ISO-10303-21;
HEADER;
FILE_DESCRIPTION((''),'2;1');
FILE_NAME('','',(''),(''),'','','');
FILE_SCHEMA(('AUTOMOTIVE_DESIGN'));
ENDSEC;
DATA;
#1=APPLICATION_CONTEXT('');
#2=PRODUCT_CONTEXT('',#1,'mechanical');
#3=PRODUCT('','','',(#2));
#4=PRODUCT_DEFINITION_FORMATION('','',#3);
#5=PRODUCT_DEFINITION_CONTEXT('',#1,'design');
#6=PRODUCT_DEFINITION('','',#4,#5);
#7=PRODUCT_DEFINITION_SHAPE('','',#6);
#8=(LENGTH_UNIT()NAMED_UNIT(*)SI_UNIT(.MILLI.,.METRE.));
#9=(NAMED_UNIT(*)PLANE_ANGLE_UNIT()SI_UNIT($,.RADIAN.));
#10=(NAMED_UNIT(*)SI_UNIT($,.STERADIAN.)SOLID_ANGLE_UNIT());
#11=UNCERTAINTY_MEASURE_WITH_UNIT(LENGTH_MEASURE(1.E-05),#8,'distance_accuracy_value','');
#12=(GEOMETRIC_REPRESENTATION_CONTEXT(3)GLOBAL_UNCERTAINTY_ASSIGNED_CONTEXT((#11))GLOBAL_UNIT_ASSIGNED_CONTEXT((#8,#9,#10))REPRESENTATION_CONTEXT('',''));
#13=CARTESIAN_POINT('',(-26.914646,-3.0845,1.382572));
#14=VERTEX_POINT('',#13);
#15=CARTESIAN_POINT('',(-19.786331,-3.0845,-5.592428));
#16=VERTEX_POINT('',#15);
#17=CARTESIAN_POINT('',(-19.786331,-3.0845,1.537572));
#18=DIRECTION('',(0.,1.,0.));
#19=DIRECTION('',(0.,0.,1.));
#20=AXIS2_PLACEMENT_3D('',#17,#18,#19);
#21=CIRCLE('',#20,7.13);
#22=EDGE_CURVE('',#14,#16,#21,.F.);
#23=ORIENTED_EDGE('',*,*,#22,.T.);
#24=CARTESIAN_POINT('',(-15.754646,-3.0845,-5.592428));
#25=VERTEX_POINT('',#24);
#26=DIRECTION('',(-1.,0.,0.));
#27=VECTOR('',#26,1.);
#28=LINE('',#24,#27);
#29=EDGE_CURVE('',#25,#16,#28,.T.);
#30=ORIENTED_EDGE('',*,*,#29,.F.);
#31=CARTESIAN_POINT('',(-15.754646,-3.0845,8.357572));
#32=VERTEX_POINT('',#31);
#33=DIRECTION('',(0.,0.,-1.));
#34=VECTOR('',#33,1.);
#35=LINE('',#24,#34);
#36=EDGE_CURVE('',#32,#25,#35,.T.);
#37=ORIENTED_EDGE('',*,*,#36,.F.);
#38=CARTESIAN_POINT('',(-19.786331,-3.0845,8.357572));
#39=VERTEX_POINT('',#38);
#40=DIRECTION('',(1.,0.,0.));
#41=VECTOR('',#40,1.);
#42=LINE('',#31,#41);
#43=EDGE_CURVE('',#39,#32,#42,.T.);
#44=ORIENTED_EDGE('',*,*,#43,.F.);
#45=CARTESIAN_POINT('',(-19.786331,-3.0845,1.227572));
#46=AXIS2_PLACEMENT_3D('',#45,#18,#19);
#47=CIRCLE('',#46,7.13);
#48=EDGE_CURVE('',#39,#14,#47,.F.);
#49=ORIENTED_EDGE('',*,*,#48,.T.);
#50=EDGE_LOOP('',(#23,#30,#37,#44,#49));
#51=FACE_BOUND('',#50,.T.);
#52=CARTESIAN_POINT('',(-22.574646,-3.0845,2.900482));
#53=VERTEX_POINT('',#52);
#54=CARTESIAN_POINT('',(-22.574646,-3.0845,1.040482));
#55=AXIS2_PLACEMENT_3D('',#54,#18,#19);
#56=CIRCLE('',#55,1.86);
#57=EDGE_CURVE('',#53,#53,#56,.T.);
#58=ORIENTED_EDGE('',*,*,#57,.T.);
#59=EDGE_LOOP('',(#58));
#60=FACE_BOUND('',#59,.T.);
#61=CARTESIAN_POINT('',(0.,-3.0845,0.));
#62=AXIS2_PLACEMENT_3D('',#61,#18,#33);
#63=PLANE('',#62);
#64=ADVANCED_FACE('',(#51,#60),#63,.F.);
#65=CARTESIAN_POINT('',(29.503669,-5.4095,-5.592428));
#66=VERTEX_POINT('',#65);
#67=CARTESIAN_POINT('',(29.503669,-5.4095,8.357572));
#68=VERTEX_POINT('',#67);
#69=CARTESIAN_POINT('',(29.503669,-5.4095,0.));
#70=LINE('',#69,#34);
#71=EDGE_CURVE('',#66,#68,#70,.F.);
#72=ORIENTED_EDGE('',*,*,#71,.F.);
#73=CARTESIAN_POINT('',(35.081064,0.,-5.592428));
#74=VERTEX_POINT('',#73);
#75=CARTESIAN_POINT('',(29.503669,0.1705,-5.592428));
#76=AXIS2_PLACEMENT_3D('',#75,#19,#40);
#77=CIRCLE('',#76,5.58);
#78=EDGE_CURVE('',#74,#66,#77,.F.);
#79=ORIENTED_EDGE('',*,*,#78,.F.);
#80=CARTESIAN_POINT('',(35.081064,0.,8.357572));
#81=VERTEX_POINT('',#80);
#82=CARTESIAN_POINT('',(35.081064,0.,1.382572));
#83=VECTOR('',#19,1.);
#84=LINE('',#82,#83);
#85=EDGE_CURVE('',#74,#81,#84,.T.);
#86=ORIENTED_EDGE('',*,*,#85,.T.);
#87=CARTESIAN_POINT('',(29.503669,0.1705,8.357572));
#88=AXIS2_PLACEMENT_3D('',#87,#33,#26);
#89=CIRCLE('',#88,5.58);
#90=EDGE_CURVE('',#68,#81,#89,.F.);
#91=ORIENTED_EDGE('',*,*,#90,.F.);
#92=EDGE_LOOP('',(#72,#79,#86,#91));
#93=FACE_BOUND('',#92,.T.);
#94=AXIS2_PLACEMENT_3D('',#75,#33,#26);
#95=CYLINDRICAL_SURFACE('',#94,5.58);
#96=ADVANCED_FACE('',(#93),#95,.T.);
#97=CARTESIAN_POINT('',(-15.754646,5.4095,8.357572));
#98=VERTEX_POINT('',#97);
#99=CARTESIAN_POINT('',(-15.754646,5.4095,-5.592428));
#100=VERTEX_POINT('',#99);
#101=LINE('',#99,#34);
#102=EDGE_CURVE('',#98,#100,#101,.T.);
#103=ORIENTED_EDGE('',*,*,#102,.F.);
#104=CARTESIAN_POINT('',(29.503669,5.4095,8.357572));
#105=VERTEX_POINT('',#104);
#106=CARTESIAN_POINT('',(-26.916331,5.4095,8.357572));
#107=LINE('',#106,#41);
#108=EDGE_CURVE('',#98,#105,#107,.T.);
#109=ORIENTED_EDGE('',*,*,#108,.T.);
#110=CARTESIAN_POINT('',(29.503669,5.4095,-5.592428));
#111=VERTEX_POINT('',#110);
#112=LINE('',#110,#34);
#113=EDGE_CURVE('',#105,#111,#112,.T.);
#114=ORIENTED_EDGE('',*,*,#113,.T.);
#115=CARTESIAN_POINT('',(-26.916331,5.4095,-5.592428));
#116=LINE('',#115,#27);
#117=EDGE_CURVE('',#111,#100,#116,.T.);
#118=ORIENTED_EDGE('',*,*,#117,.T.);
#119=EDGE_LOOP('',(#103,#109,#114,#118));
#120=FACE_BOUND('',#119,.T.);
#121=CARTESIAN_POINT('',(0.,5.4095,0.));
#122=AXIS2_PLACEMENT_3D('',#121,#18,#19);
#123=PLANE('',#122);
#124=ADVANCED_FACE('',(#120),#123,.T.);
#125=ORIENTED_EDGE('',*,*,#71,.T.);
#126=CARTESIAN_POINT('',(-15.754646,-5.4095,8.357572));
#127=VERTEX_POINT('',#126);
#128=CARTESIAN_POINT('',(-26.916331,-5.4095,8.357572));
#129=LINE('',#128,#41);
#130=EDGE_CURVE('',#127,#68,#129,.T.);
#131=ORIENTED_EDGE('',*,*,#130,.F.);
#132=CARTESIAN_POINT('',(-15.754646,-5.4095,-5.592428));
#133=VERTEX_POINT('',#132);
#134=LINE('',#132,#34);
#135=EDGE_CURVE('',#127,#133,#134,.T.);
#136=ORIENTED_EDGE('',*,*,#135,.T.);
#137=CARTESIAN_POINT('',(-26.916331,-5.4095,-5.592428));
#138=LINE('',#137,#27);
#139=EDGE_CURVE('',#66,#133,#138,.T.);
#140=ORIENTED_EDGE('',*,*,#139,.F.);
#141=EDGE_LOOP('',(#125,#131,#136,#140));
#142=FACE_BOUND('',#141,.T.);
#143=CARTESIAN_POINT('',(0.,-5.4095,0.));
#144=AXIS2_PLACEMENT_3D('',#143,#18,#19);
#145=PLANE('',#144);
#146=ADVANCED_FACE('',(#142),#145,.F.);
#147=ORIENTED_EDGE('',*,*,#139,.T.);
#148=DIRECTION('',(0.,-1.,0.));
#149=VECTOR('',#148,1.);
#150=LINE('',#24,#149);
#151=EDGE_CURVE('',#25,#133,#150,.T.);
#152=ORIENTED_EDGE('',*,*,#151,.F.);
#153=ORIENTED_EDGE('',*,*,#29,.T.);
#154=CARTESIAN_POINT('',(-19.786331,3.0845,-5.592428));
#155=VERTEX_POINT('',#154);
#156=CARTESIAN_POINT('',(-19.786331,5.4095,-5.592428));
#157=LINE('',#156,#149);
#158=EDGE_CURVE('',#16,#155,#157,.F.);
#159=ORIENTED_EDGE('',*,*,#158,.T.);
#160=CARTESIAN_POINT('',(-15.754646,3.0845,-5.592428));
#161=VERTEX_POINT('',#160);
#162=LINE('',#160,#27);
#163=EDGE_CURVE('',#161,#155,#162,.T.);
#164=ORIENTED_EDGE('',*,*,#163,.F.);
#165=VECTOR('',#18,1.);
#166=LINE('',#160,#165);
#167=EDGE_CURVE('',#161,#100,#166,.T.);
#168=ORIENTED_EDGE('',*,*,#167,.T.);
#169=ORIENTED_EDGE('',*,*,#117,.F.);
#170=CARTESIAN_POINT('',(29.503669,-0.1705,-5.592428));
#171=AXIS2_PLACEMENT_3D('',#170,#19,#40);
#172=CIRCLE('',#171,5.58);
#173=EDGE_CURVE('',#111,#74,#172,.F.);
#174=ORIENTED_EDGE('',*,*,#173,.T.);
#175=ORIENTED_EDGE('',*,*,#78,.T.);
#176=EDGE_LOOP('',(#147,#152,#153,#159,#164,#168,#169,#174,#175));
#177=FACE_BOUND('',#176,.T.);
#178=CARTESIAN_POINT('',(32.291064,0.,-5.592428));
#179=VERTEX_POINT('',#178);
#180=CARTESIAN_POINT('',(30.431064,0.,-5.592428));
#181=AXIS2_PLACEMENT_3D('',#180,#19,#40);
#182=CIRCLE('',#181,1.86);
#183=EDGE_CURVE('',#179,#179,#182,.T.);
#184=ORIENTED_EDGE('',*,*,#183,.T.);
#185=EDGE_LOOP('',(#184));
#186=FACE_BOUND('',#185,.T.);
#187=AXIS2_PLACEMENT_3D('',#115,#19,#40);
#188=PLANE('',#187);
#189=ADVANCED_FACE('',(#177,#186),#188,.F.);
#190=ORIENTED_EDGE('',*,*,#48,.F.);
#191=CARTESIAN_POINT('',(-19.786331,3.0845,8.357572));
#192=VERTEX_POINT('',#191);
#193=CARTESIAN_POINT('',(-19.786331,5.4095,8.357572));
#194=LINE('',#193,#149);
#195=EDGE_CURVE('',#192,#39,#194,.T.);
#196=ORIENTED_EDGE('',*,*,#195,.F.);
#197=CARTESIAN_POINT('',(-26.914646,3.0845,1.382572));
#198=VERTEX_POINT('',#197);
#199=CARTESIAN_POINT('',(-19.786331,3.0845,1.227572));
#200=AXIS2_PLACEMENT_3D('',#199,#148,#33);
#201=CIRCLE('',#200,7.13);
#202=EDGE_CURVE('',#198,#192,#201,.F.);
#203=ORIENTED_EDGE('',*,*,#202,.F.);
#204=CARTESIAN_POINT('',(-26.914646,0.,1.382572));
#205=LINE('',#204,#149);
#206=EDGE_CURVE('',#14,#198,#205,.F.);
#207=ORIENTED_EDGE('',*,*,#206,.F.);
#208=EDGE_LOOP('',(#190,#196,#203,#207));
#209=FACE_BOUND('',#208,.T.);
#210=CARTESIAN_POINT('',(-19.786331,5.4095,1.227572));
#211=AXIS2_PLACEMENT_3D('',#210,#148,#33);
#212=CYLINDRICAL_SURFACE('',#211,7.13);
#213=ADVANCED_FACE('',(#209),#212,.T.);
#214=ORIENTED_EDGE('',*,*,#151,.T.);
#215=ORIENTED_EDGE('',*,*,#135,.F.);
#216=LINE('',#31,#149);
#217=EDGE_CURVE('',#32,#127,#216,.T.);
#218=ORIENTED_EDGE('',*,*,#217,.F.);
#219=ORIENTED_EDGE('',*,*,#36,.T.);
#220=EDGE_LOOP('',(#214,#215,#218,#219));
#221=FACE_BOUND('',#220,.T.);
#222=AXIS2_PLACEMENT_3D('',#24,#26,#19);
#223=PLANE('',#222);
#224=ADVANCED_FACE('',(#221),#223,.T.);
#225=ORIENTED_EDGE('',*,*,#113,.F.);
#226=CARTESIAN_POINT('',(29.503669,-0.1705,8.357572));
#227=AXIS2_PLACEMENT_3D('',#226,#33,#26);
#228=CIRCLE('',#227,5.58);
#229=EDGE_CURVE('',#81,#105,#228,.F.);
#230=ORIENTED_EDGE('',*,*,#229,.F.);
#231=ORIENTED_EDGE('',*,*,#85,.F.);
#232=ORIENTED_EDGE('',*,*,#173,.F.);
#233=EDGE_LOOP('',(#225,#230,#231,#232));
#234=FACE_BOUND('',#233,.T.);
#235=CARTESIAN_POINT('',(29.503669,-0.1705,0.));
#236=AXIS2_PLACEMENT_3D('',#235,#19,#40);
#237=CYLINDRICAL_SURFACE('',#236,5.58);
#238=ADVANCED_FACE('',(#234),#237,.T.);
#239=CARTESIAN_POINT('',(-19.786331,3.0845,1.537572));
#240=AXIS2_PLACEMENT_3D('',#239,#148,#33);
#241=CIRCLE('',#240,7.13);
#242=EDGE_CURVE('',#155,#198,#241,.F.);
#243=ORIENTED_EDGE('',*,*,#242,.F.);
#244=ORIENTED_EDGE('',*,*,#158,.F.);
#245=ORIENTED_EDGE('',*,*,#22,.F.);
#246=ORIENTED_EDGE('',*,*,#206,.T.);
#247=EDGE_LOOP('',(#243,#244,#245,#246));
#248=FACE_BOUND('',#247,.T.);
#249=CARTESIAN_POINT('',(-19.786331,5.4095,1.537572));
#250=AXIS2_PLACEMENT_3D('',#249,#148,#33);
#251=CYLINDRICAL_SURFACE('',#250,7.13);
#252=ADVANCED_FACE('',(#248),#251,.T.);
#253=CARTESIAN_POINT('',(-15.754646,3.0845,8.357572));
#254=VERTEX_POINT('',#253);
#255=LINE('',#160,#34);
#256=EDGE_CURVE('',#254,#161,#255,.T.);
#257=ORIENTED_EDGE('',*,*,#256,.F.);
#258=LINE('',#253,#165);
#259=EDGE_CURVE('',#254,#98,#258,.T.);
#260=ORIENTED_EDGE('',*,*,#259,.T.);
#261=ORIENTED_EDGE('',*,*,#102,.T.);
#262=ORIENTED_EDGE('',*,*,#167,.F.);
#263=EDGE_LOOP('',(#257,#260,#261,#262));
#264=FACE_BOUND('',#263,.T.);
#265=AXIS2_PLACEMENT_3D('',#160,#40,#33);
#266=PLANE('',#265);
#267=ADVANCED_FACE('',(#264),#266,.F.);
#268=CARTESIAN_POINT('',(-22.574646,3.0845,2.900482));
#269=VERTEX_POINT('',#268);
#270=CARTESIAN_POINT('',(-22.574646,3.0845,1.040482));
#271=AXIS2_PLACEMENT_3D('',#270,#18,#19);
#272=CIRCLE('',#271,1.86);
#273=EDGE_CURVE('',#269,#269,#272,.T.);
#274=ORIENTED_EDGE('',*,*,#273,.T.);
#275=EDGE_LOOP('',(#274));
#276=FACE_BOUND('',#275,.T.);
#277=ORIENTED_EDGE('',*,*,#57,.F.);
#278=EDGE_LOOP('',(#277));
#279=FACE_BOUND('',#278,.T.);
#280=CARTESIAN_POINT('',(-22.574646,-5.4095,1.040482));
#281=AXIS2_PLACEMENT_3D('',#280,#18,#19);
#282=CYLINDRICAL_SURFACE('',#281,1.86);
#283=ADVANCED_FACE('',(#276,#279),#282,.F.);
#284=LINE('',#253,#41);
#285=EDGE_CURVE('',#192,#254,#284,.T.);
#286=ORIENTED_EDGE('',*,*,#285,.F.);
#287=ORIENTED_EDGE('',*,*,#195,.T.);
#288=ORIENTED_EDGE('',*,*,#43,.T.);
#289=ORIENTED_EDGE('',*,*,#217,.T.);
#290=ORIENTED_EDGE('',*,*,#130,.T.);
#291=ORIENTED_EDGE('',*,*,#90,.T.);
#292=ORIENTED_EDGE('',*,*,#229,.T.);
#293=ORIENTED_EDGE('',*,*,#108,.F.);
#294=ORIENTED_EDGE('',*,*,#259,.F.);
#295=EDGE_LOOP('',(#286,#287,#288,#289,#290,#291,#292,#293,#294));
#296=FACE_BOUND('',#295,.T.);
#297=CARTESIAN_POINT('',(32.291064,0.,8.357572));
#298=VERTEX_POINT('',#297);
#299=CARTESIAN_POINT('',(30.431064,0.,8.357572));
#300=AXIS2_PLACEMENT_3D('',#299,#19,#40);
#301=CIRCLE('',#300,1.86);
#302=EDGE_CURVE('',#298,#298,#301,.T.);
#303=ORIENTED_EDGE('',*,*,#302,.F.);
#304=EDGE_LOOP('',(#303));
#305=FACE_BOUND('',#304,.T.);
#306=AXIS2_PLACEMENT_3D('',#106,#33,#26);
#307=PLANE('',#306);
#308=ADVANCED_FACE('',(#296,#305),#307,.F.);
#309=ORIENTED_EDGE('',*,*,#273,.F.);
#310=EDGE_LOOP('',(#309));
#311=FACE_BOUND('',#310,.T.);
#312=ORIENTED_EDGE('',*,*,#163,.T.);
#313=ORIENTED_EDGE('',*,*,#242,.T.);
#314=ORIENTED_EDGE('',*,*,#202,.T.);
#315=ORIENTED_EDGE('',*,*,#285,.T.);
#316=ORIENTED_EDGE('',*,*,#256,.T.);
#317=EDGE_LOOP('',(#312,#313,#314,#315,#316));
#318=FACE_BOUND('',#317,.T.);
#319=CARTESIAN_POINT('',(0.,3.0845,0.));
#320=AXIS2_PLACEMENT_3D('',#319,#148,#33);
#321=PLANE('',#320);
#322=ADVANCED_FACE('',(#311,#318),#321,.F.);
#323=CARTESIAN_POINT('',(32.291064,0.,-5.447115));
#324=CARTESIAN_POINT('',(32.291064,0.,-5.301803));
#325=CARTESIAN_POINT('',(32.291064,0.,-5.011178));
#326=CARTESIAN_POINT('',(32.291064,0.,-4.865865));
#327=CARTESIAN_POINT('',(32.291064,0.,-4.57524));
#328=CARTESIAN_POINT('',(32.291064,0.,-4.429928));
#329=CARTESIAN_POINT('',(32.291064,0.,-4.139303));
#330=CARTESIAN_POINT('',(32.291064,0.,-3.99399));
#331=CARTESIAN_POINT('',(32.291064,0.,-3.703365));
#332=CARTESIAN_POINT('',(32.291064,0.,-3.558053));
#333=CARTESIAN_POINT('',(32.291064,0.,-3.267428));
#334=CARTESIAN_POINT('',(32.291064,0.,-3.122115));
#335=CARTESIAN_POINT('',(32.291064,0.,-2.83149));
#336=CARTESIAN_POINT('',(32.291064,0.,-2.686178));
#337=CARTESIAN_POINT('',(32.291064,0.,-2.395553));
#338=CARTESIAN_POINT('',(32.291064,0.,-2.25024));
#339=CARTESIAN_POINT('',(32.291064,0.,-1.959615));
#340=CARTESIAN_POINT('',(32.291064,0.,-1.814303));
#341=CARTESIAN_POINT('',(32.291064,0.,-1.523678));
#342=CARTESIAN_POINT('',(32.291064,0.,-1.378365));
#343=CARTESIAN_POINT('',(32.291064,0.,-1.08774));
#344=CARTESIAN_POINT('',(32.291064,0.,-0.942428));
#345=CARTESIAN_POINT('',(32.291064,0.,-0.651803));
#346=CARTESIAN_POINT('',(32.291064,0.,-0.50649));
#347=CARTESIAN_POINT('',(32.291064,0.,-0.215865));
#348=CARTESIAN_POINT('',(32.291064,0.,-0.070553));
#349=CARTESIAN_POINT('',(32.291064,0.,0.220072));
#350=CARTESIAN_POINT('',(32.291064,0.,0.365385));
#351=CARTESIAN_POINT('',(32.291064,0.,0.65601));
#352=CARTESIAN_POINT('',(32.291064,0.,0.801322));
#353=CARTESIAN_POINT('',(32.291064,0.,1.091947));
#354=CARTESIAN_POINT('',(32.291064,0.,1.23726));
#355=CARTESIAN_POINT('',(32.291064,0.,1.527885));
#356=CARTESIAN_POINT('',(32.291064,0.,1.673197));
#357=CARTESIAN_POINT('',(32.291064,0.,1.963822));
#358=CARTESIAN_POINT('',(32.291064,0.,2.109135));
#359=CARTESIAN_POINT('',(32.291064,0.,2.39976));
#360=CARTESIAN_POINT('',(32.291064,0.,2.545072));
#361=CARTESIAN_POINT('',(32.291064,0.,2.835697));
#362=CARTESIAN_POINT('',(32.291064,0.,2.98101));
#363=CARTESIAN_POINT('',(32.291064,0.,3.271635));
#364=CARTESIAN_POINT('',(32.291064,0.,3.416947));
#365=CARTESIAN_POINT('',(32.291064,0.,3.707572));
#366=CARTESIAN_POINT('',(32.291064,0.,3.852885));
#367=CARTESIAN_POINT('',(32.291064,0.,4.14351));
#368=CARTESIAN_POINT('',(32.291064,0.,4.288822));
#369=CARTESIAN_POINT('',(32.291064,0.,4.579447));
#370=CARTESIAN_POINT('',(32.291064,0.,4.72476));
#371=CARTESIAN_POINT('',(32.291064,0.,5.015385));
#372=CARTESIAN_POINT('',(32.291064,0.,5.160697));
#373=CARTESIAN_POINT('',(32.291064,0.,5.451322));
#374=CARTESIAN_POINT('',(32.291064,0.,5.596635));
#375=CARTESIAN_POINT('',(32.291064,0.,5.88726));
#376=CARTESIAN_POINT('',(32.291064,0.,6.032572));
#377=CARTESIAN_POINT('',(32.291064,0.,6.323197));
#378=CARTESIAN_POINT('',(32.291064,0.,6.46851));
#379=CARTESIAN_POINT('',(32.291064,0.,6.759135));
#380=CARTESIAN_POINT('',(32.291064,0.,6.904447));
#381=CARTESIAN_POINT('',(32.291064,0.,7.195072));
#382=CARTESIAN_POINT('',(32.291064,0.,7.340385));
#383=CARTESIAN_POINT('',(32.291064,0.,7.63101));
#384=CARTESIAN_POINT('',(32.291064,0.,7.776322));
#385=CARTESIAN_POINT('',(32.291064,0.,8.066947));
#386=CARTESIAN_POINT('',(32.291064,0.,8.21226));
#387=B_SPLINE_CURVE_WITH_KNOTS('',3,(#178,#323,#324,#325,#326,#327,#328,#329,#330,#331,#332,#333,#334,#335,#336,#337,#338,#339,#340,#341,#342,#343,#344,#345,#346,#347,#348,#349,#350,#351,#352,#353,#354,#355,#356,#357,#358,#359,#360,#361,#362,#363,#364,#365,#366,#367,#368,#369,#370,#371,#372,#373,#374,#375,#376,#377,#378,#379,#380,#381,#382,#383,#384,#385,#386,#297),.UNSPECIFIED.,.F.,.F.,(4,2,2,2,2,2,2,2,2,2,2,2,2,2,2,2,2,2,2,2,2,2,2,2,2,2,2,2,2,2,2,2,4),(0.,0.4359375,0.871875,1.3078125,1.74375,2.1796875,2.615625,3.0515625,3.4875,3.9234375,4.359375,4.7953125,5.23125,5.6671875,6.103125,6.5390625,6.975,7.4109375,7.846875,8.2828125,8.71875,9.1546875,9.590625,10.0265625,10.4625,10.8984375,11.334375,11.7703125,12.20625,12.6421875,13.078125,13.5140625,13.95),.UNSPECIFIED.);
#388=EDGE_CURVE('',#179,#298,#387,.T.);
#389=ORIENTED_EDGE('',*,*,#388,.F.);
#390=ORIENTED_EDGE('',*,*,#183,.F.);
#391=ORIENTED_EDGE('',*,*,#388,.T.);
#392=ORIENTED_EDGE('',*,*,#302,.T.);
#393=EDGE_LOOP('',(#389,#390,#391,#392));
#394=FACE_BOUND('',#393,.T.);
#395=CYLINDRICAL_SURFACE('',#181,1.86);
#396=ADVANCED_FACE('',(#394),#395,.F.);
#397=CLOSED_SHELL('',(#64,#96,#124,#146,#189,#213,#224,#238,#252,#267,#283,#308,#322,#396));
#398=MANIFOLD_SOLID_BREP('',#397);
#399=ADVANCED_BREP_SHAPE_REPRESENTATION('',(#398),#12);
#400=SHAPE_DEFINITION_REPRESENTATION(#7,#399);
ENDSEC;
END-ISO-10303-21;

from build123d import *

# Parameters (mm, degrees)
SKETCH1_W           = 200
SKETCH1_H           = 45
BOSS_EXTRUDE1_DEPTH = 17.45
FILLET1_R           = 18
FILLET2_R           = 23
SKETCH2_W           = 40
SKETCH2_H           = 45
CUT_EXTRUDE1_DEPTH  = 7.5
SKETCH3_R           = 6
CUT_EXTRUDE2_DEPTH  = 120.515065654
SKETCH4_R           = 6
CUT_EXTRUDE3_DEPTH  = 124.027462877
SCALE1_SCALE        = 0.31


with BuildPart() as part:
    # Sketch1 → Boss-Extrude1 (new, symmetric)
    with BuildSketch(Plane(origin=(0, 0, 0), x_dir=(1, 0, 0), z_dir=(0, 1, 0))):
        with Locations((13.173125929, -4.459910913)):
            Rectangle(SKETCH1_W, SKETCH1_H)
    extrude(amount=BOSS_EXTRUDE1_DEPTH, both=True)

    # Fillet1
    # the kernel refuses this fillet: 18 mm, written as the material it takes off along each edge
    with BuildSketch(Plane(origin=(113.173125929, -17.45, -63.040089087), x_dir=(0, 1, 0), z_dir=(0, 0, 1)), Plane(origin=(113.173125929, 17.45, -63.040089087), x_dir=(-1, 0, 0), z_dir=(0, 0, 1))) as fillet1_piece_1:
        with BuildLine():
            CenterArc((FILLET1_R, FILLET1_R), FILLET1_R, 180, 90)
            Line((0, FILLET1_R), (0, 0))
            Line((0, 0), (FILLET1_R, 0))
        make_face()
    extrude(amount=135, mode=Mode.SUBTRACT)

    # Fillet2
    # the kernel refuses this fillet: 23 mm, written as the material it takes off along each edge
    with BuildSketch(Plane(origin=(-86.826874071, -74.95, -18.040089087), x_dir=(1, 0, 0), z_dir=(0, 1, 0)), Plane(origin=(-86.826874071, -74.95, 26.959910913), x_dir=(0, 0, -1), z_dir=(0, 1, 0))) as fillet2_piece_1:
        with BuildLine():
            CenterArc((FILLET2_R, -FILLET2_R), FILLET2_R, 90, 90)
            Line((0, -FILLET2_R), (0, 0))
            Line((0, 0), (FILLET2_R, 0))
        make_face()
    extrude(amount=149.9, mode=Mode.SUBTRACT)

    # Sketch2 → Cut-Extrude1 (cut)
    with BuildSketch(Plane(origin=(0, 17.45, 0), x_dir=(1, 0, 0), z_dir=(0, 1, 0))):
        with Locations((-70.821438646, -4.459910913)):
            Rectangle(SKETCH2_W, SKETCH2_H)
    cut_extrude1 = extrude(amount=-CUT_EXTRUDE1_DEPTH, mode=Mode.SUBTRACT)

    # Mirror1: Cut-Extrude1 across plane
    add(cut_extrude1.mirror(Plane.ZX), mode=Mode.SUBTRACT)

    # Sketch3 → Cut-Extrude2 (cut, through all)
    with BuildSketch(Plane(origin=(0, 9.95, 0), x_dir=(1, 0, 0), z_dir=(0, 1, 0))):
        with Locations(Location((-72.821438646, -3.356394194, 0), (0, 0, 270))):
            Circle(SKETCH3_R)
    extrude(amount=-CUT_EXTRUDE2_DEPTH, mode=Mode.SUBTRACT)

    # Sketch4 → Cut-Extrude3 (cut, through all)
    with BuildSketch(Plane.XY.offset(26.959910913)):
        with Locations((98.164721189, 0)):
            Circle(SKETCH4_R)
    extrude(amount=-CUT_EXTRUDE3_DEPTH, mode=Mode.SUBTRACT)


with BuildPart() as part_1:
    # Scale1: scaled about (0, 0, 0)
    add(part.part.scale(SCALE1_SCALE))


solid = part_1.part
